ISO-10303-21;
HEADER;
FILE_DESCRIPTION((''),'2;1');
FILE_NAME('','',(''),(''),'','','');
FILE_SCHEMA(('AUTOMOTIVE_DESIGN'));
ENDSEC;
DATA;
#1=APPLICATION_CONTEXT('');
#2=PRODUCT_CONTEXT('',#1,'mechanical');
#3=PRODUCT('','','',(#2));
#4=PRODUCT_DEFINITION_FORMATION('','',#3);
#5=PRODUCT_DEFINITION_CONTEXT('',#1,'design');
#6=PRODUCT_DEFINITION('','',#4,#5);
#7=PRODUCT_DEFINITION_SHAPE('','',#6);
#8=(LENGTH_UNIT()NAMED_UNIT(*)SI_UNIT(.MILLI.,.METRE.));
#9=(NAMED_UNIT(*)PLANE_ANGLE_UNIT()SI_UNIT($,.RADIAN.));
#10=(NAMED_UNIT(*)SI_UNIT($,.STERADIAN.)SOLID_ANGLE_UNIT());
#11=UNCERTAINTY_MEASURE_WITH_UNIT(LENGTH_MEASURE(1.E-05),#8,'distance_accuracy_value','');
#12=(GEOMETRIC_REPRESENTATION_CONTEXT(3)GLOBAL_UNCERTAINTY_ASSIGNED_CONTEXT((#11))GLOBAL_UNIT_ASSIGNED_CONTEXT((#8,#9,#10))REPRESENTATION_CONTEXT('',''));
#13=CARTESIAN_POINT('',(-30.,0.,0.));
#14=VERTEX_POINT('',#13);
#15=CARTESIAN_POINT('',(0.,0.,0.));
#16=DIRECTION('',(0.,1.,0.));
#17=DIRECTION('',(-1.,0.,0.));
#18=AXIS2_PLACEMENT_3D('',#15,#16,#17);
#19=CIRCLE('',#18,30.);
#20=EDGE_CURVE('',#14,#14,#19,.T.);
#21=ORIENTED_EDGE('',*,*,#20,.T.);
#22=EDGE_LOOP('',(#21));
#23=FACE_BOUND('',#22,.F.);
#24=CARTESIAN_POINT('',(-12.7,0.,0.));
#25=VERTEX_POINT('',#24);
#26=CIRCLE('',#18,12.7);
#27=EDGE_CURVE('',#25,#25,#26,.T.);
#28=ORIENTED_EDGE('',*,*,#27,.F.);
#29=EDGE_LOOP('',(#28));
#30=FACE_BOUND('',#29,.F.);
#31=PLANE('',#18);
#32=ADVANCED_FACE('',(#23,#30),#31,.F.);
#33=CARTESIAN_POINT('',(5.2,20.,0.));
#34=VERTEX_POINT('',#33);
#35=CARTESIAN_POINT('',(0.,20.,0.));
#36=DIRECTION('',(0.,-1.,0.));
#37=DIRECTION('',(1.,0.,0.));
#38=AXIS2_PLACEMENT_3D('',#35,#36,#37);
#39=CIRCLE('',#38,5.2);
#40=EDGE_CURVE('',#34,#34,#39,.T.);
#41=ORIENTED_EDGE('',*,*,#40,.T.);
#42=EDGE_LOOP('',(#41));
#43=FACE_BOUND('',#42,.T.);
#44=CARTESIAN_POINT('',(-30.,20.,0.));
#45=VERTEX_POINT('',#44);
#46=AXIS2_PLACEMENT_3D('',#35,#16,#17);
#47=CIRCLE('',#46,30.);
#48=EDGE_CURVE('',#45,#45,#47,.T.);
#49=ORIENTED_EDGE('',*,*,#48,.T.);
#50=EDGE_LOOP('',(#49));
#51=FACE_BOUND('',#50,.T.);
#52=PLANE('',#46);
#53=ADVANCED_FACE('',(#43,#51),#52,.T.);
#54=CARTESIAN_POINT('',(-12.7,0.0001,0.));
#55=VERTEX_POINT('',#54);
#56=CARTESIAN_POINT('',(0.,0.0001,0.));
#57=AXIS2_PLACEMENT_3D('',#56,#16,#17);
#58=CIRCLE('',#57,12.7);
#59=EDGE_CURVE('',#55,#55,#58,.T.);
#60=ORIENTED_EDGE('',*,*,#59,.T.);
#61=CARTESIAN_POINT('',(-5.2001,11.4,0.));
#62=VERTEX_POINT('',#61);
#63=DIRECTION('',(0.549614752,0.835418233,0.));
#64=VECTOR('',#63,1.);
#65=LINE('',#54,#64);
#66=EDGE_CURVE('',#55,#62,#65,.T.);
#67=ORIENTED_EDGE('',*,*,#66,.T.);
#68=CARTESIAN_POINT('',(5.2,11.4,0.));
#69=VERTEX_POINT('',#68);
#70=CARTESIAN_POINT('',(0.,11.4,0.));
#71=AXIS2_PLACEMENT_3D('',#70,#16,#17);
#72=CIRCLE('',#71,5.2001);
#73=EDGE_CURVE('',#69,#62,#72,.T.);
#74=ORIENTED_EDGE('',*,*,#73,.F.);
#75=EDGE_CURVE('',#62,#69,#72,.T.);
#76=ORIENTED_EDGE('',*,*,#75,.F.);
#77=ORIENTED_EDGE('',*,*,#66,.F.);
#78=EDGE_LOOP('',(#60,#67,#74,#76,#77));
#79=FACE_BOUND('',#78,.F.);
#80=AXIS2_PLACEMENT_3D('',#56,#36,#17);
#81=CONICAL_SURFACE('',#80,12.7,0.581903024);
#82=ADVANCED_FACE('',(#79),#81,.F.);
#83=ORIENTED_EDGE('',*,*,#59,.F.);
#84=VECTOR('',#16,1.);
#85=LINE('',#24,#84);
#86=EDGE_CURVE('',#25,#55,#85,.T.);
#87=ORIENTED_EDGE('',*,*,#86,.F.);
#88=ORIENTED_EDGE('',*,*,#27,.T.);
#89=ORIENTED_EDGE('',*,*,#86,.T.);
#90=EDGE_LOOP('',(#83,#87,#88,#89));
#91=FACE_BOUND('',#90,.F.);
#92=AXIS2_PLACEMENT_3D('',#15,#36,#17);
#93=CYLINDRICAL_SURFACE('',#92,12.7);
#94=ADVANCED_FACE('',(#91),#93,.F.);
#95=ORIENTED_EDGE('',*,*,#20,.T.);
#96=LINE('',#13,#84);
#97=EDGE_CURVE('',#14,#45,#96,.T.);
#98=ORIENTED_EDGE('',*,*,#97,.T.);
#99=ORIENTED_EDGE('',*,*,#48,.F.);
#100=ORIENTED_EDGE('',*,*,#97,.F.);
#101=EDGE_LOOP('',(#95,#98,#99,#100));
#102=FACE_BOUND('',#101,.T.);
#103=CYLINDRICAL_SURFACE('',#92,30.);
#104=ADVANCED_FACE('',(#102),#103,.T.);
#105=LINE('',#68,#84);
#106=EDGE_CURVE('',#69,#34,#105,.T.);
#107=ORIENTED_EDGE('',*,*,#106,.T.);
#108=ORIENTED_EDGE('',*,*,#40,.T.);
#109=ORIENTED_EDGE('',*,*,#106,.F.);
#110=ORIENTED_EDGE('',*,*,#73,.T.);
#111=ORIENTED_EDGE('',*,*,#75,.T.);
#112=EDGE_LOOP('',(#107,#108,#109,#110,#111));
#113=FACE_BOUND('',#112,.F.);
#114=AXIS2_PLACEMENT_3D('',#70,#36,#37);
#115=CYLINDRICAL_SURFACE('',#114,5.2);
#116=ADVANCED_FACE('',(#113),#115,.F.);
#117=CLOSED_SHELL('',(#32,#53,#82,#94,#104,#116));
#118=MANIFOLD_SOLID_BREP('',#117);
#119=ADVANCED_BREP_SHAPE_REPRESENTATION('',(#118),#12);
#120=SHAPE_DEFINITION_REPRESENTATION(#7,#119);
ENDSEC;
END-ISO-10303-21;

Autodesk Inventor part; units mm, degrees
ref_plane "YZ Plane" through (0, 0, 0) normal (1, 0, 0) x (0, 1, 0)
ref_plane "XZ Plane" through (0, 0, 0) normal (0, 1, 0) x (-1, 0, 0)
ref_plane "XY Plane" through (0, 0, 0) normal (0, 0, 1) x (1, 0, 0)
sketch "Sketch1" plane through (0, 0, 0) normal (0, 1, 0) x (-1, 0, 0)
  circle A0 centre (0, 0) radius 30
  circle A1 centre (0, 0) radius 12.7
  dimension "d1" = 60
  dimension "d14" = 25.4
extrude "Extrusion1" add sketch "Sketch1" along normal blind 20 contours A0 | A1
extrude "Extrusion2" cut sketch "Sketch1" along normal blind 11.4 contours A1
chamfer "Chamfer2" distance 11.4 distance2 7.5 1 edges at (12.7, 11.4, 0) measured on face at (-12.5355, 7.6, -2.0372)
sketch "Sketch2" plane through (0, 11.4, 0) normal (0, -1, 0) x (1, 0, 0)
  circle A0 centre (0, 0) radius 5.2
extrude "Extrusion3" cut sketch "Sketch2" against normal blind 11.4
properties part number "1. ring"
